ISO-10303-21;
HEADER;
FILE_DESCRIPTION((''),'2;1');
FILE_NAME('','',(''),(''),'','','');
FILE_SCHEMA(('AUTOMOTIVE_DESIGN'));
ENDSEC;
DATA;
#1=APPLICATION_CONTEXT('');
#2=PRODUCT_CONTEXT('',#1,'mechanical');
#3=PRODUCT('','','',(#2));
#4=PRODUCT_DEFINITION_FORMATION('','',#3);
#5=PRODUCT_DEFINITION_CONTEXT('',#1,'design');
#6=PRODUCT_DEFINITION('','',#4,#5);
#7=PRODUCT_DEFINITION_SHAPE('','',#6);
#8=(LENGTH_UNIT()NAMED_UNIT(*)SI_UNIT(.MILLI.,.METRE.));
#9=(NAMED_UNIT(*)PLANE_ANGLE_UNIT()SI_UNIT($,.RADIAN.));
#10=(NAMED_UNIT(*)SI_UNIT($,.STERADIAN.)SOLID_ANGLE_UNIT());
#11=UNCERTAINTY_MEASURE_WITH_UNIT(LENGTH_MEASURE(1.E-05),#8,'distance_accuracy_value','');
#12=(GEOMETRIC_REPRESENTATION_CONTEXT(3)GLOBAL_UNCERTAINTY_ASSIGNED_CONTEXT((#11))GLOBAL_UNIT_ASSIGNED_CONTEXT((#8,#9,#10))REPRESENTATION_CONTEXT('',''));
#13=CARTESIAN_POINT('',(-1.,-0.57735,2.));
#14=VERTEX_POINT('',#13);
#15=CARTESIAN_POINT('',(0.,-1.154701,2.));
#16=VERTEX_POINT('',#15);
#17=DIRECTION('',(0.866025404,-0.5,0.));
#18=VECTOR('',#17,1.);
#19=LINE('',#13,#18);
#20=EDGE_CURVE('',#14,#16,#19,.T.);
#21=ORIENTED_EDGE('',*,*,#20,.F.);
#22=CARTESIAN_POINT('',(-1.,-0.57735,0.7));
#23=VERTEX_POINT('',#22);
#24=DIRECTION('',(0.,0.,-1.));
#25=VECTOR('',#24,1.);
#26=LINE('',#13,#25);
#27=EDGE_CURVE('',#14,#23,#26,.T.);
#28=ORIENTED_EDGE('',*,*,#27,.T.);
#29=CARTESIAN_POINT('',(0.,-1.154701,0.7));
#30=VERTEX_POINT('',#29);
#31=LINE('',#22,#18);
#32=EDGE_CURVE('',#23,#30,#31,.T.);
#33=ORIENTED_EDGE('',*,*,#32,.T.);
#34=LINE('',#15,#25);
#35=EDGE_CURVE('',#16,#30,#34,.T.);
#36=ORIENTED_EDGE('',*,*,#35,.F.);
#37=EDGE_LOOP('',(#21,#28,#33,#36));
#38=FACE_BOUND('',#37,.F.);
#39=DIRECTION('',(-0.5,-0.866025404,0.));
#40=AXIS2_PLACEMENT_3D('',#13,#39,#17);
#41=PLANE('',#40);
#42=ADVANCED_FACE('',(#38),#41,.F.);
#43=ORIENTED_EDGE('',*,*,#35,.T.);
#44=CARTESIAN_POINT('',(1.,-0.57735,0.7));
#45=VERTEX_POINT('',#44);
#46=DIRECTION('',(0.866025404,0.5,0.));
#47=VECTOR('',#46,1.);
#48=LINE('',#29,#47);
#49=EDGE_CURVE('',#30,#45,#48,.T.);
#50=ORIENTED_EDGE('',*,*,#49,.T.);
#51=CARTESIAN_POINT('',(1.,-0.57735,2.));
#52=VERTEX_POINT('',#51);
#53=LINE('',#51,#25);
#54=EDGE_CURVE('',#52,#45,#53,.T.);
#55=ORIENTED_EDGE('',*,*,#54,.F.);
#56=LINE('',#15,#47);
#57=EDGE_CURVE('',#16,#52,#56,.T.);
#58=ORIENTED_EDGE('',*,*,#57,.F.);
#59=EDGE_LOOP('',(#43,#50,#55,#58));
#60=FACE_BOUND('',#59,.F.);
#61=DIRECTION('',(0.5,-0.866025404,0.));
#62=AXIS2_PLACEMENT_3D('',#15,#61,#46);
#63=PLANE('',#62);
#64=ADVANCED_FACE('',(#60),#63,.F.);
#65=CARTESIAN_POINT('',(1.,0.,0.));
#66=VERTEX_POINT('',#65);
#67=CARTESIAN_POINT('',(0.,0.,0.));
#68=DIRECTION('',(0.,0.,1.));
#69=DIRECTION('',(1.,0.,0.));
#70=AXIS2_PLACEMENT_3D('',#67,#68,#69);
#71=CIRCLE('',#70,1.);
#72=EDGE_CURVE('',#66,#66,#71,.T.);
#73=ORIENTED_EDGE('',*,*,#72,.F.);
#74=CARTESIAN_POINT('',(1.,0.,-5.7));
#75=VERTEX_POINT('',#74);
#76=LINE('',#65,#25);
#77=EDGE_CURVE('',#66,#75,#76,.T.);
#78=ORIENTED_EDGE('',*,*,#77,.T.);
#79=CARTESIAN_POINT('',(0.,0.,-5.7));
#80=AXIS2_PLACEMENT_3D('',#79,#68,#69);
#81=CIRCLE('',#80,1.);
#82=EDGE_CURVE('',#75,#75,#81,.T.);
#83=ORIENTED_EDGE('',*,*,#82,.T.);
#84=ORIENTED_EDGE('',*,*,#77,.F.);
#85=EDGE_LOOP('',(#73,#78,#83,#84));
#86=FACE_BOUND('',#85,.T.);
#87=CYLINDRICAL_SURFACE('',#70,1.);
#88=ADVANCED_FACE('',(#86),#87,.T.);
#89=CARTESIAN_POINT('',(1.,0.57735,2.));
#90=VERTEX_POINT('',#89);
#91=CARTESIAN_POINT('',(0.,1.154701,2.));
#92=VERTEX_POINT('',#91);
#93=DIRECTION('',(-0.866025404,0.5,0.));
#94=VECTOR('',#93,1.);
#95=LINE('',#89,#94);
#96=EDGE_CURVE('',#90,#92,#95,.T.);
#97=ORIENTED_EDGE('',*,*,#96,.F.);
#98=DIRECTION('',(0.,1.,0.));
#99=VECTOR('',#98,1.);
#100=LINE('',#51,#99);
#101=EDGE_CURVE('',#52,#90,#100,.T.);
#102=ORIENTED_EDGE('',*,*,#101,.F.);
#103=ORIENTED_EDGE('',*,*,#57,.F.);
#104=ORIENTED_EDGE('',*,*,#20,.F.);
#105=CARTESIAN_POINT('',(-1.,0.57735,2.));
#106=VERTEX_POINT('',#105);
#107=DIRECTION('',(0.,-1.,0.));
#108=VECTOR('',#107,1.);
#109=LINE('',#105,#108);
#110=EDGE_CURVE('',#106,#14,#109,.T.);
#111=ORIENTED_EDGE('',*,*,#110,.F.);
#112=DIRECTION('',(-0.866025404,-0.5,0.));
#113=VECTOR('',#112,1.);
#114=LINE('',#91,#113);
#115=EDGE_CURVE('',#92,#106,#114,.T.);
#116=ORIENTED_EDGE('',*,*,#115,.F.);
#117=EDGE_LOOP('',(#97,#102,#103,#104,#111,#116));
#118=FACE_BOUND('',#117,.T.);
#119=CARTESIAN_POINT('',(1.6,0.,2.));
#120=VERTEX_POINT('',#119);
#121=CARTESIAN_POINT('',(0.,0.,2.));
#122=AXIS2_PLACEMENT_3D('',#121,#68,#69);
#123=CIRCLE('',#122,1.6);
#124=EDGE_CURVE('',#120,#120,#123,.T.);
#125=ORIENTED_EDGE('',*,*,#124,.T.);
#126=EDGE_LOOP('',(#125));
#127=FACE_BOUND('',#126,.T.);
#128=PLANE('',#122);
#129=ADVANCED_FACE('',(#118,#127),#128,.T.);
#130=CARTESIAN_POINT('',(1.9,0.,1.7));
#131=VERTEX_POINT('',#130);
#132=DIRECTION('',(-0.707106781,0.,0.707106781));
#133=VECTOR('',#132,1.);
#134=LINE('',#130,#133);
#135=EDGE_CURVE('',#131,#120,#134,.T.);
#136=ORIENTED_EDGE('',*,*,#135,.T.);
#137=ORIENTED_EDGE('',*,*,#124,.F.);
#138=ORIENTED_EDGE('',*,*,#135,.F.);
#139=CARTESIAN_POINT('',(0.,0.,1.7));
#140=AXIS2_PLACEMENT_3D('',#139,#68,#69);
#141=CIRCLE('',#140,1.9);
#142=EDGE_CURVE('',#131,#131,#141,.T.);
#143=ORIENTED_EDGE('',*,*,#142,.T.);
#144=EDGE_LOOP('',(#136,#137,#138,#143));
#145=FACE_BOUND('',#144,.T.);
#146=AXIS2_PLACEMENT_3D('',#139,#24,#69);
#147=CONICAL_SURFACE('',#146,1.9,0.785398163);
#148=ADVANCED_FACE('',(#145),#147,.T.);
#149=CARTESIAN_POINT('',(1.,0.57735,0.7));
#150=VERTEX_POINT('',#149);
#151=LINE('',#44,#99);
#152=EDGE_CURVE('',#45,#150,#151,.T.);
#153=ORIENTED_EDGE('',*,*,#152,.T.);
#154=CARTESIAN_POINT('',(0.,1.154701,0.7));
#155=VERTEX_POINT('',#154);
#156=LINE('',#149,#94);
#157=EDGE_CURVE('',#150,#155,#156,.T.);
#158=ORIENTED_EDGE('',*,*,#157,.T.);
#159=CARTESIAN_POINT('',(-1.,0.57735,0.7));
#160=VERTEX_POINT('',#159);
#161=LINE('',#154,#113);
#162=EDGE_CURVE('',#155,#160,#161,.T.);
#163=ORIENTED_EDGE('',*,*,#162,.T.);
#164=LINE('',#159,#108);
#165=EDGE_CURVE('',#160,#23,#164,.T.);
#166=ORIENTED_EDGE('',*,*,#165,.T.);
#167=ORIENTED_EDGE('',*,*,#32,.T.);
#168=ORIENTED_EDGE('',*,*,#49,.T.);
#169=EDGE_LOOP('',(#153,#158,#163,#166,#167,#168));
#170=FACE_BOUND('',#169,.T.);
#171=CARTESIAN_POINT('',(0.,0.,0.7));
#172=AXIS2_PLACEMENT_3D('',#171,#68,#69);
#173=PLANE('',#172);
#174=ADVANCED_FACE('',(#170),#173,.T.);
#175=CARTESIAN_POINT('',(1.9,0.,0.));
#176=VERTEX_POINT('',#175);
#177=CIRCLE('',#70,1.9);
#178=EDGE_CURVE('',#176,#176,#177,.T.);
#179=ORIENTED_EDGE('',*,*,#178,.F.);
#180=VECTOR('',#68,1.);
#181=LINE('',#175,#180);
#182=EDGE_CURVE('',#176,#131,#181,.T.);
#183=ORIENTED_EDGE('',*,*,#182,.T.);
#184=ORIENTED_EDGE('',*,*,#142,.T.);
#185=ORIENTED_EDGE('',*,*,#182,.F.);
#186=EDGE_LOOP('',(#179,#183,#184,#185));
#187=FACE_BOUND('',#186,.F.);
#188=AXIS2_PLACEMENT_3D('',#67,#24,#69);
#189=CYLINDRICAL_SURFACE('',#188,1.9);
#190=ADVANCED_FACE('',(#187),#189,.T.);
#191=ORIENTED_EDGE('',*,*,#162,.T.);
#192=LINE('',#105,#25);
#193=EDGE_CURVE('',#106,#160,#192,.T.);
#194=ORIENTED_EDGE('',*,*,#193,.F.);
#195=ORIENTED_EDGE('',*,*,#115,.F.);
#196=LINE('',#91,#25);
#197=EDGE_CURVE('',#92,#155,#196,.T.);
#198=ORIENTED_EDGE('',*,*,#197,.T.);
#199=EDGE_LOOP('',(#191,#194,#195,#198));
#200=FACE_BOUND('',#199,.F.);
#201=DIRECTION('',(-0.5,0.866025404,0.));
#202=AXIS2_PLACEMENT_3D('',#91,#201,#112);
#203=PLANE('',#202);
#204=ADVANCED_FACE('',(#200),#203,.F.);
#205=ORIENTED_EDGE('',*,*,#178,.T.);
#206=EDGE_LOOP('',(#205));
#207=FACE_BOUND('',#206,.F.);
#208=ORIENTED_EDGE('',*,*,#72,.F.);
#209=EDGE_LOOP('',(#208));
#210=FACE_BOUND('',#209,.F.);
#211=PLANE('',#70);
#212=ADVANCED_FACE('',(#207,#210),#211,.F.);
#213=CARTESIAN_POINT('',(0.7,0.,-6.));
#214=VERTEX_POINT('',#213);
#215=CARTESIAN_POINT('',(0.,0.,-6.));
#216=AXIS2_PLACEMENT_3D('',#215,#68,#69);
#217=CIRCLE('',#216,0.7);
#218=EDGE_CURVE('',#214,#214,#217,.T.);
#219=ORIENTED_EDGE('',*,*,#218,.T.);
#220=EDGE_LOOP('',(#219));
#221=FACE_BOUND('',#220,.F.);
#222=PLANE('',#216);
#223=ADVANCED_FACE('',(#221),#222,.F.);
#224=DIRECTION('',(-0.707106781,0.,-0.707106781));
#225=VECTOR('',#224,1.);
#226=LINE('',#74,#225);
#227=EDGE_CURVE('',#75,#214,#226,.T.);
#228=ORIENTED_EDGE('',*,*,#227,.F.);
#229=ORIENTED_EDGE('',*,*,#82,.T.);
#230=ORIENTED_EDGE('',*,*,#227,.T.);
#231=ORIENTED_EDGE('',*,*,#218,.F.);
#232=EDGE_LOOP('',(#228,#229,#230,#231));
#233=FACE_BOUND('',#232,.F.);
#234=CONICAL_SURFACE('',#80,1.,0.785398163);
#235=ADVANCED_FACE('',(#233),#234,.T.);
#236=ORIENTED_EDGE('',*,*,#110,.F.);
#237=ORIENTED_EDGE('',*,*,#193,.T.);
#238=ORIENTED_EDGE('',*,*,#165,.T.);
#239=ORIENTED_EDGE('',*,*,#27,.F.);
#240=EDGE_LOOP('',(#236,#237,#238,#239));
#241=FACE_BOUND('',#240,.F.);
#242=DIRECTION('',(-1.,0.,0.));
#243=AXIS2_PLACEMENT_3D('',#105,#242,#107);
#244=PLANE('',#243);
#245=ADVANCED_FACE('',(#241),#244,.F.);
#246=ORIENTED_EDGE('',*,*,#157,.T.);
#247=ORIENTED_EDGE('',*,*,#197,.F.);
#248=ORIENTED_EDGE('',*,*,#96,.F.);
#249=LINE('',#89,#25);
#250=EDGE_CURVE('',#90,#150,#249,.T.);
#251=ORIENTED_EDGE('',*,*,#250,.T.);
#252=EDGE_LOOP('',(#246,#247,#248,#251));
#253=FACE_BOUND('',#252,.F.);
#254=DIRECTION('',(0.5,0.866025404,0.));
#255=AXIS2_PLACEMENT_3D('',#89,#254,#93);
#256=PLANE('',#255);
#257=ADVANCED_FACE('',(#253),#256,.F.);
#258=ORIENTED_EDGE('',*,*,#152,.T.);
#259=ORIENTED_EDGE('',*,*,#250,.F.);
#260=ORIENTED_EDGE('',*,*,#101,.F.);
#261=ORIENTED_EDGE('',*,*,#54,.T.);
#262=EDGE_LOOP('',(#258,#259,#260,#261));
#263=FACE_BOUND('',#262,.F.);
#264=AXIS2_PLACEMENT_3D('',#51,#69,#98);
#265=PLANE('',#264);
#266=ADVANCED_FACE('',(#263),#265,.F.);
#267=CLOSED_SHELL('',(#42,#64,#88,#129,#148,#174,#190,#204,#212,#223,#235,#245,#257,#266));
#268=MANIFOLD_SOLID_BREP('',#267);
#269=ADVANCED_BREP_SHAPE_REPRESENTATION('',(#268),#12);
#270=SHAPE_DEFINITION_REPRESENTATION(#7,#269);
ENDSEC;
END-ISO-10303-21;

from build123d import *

# Parameters (mm, degrees)
F2_R      = 1
F3_DEPTH  = 6
F2_R_2    = 1.9
F3_FACE_R = 1
F4_DEPTH  = 2
F5_SIZE   = 0.3
F7_DEPTH  = 1.3


with BuildPart() as f3:
    # F2 (on Top) → F3 (new body)
    with BuildSketch(Plane.XY):
        Circle(F2_R)
    extrude(amount=-F3_DEPTH)

    # F2 (on Top) + F3_face (on face) → F4 (join)
    with BuildSketch(Plane.XY):
        Circle(F2_R_2)
        Circle(F2_R, mode=Mode.SUBTRACT)
    with BuildSketch(Plane.XY):
        Circle(F3_FACE_R)
    extrude(amount=F4_DEPTH)

    # F5
    f5_edges = [f3.edges().sort_by_distance(p)[0] for p in [
        (-1, 0, -6),
        (-1.9, 0, 2),
    ]]
    chamfer(f5_edges, length=F5_SIZE)

    # F6 (on face) → F7 (cut)
    with BuildSketch(Plane.XY.offset(2)):
        Polygon((1, -0.5773502692), (1, 0.5773502692), (0, 1.1547005384), (-1, 0.5773502692), (-1, -0.5773502692), (0, -1.1547005384), align=None)
    extrude(amount=-F7_DEPTH, mode=Mode.SUBTRACT)


solid = f3.part
